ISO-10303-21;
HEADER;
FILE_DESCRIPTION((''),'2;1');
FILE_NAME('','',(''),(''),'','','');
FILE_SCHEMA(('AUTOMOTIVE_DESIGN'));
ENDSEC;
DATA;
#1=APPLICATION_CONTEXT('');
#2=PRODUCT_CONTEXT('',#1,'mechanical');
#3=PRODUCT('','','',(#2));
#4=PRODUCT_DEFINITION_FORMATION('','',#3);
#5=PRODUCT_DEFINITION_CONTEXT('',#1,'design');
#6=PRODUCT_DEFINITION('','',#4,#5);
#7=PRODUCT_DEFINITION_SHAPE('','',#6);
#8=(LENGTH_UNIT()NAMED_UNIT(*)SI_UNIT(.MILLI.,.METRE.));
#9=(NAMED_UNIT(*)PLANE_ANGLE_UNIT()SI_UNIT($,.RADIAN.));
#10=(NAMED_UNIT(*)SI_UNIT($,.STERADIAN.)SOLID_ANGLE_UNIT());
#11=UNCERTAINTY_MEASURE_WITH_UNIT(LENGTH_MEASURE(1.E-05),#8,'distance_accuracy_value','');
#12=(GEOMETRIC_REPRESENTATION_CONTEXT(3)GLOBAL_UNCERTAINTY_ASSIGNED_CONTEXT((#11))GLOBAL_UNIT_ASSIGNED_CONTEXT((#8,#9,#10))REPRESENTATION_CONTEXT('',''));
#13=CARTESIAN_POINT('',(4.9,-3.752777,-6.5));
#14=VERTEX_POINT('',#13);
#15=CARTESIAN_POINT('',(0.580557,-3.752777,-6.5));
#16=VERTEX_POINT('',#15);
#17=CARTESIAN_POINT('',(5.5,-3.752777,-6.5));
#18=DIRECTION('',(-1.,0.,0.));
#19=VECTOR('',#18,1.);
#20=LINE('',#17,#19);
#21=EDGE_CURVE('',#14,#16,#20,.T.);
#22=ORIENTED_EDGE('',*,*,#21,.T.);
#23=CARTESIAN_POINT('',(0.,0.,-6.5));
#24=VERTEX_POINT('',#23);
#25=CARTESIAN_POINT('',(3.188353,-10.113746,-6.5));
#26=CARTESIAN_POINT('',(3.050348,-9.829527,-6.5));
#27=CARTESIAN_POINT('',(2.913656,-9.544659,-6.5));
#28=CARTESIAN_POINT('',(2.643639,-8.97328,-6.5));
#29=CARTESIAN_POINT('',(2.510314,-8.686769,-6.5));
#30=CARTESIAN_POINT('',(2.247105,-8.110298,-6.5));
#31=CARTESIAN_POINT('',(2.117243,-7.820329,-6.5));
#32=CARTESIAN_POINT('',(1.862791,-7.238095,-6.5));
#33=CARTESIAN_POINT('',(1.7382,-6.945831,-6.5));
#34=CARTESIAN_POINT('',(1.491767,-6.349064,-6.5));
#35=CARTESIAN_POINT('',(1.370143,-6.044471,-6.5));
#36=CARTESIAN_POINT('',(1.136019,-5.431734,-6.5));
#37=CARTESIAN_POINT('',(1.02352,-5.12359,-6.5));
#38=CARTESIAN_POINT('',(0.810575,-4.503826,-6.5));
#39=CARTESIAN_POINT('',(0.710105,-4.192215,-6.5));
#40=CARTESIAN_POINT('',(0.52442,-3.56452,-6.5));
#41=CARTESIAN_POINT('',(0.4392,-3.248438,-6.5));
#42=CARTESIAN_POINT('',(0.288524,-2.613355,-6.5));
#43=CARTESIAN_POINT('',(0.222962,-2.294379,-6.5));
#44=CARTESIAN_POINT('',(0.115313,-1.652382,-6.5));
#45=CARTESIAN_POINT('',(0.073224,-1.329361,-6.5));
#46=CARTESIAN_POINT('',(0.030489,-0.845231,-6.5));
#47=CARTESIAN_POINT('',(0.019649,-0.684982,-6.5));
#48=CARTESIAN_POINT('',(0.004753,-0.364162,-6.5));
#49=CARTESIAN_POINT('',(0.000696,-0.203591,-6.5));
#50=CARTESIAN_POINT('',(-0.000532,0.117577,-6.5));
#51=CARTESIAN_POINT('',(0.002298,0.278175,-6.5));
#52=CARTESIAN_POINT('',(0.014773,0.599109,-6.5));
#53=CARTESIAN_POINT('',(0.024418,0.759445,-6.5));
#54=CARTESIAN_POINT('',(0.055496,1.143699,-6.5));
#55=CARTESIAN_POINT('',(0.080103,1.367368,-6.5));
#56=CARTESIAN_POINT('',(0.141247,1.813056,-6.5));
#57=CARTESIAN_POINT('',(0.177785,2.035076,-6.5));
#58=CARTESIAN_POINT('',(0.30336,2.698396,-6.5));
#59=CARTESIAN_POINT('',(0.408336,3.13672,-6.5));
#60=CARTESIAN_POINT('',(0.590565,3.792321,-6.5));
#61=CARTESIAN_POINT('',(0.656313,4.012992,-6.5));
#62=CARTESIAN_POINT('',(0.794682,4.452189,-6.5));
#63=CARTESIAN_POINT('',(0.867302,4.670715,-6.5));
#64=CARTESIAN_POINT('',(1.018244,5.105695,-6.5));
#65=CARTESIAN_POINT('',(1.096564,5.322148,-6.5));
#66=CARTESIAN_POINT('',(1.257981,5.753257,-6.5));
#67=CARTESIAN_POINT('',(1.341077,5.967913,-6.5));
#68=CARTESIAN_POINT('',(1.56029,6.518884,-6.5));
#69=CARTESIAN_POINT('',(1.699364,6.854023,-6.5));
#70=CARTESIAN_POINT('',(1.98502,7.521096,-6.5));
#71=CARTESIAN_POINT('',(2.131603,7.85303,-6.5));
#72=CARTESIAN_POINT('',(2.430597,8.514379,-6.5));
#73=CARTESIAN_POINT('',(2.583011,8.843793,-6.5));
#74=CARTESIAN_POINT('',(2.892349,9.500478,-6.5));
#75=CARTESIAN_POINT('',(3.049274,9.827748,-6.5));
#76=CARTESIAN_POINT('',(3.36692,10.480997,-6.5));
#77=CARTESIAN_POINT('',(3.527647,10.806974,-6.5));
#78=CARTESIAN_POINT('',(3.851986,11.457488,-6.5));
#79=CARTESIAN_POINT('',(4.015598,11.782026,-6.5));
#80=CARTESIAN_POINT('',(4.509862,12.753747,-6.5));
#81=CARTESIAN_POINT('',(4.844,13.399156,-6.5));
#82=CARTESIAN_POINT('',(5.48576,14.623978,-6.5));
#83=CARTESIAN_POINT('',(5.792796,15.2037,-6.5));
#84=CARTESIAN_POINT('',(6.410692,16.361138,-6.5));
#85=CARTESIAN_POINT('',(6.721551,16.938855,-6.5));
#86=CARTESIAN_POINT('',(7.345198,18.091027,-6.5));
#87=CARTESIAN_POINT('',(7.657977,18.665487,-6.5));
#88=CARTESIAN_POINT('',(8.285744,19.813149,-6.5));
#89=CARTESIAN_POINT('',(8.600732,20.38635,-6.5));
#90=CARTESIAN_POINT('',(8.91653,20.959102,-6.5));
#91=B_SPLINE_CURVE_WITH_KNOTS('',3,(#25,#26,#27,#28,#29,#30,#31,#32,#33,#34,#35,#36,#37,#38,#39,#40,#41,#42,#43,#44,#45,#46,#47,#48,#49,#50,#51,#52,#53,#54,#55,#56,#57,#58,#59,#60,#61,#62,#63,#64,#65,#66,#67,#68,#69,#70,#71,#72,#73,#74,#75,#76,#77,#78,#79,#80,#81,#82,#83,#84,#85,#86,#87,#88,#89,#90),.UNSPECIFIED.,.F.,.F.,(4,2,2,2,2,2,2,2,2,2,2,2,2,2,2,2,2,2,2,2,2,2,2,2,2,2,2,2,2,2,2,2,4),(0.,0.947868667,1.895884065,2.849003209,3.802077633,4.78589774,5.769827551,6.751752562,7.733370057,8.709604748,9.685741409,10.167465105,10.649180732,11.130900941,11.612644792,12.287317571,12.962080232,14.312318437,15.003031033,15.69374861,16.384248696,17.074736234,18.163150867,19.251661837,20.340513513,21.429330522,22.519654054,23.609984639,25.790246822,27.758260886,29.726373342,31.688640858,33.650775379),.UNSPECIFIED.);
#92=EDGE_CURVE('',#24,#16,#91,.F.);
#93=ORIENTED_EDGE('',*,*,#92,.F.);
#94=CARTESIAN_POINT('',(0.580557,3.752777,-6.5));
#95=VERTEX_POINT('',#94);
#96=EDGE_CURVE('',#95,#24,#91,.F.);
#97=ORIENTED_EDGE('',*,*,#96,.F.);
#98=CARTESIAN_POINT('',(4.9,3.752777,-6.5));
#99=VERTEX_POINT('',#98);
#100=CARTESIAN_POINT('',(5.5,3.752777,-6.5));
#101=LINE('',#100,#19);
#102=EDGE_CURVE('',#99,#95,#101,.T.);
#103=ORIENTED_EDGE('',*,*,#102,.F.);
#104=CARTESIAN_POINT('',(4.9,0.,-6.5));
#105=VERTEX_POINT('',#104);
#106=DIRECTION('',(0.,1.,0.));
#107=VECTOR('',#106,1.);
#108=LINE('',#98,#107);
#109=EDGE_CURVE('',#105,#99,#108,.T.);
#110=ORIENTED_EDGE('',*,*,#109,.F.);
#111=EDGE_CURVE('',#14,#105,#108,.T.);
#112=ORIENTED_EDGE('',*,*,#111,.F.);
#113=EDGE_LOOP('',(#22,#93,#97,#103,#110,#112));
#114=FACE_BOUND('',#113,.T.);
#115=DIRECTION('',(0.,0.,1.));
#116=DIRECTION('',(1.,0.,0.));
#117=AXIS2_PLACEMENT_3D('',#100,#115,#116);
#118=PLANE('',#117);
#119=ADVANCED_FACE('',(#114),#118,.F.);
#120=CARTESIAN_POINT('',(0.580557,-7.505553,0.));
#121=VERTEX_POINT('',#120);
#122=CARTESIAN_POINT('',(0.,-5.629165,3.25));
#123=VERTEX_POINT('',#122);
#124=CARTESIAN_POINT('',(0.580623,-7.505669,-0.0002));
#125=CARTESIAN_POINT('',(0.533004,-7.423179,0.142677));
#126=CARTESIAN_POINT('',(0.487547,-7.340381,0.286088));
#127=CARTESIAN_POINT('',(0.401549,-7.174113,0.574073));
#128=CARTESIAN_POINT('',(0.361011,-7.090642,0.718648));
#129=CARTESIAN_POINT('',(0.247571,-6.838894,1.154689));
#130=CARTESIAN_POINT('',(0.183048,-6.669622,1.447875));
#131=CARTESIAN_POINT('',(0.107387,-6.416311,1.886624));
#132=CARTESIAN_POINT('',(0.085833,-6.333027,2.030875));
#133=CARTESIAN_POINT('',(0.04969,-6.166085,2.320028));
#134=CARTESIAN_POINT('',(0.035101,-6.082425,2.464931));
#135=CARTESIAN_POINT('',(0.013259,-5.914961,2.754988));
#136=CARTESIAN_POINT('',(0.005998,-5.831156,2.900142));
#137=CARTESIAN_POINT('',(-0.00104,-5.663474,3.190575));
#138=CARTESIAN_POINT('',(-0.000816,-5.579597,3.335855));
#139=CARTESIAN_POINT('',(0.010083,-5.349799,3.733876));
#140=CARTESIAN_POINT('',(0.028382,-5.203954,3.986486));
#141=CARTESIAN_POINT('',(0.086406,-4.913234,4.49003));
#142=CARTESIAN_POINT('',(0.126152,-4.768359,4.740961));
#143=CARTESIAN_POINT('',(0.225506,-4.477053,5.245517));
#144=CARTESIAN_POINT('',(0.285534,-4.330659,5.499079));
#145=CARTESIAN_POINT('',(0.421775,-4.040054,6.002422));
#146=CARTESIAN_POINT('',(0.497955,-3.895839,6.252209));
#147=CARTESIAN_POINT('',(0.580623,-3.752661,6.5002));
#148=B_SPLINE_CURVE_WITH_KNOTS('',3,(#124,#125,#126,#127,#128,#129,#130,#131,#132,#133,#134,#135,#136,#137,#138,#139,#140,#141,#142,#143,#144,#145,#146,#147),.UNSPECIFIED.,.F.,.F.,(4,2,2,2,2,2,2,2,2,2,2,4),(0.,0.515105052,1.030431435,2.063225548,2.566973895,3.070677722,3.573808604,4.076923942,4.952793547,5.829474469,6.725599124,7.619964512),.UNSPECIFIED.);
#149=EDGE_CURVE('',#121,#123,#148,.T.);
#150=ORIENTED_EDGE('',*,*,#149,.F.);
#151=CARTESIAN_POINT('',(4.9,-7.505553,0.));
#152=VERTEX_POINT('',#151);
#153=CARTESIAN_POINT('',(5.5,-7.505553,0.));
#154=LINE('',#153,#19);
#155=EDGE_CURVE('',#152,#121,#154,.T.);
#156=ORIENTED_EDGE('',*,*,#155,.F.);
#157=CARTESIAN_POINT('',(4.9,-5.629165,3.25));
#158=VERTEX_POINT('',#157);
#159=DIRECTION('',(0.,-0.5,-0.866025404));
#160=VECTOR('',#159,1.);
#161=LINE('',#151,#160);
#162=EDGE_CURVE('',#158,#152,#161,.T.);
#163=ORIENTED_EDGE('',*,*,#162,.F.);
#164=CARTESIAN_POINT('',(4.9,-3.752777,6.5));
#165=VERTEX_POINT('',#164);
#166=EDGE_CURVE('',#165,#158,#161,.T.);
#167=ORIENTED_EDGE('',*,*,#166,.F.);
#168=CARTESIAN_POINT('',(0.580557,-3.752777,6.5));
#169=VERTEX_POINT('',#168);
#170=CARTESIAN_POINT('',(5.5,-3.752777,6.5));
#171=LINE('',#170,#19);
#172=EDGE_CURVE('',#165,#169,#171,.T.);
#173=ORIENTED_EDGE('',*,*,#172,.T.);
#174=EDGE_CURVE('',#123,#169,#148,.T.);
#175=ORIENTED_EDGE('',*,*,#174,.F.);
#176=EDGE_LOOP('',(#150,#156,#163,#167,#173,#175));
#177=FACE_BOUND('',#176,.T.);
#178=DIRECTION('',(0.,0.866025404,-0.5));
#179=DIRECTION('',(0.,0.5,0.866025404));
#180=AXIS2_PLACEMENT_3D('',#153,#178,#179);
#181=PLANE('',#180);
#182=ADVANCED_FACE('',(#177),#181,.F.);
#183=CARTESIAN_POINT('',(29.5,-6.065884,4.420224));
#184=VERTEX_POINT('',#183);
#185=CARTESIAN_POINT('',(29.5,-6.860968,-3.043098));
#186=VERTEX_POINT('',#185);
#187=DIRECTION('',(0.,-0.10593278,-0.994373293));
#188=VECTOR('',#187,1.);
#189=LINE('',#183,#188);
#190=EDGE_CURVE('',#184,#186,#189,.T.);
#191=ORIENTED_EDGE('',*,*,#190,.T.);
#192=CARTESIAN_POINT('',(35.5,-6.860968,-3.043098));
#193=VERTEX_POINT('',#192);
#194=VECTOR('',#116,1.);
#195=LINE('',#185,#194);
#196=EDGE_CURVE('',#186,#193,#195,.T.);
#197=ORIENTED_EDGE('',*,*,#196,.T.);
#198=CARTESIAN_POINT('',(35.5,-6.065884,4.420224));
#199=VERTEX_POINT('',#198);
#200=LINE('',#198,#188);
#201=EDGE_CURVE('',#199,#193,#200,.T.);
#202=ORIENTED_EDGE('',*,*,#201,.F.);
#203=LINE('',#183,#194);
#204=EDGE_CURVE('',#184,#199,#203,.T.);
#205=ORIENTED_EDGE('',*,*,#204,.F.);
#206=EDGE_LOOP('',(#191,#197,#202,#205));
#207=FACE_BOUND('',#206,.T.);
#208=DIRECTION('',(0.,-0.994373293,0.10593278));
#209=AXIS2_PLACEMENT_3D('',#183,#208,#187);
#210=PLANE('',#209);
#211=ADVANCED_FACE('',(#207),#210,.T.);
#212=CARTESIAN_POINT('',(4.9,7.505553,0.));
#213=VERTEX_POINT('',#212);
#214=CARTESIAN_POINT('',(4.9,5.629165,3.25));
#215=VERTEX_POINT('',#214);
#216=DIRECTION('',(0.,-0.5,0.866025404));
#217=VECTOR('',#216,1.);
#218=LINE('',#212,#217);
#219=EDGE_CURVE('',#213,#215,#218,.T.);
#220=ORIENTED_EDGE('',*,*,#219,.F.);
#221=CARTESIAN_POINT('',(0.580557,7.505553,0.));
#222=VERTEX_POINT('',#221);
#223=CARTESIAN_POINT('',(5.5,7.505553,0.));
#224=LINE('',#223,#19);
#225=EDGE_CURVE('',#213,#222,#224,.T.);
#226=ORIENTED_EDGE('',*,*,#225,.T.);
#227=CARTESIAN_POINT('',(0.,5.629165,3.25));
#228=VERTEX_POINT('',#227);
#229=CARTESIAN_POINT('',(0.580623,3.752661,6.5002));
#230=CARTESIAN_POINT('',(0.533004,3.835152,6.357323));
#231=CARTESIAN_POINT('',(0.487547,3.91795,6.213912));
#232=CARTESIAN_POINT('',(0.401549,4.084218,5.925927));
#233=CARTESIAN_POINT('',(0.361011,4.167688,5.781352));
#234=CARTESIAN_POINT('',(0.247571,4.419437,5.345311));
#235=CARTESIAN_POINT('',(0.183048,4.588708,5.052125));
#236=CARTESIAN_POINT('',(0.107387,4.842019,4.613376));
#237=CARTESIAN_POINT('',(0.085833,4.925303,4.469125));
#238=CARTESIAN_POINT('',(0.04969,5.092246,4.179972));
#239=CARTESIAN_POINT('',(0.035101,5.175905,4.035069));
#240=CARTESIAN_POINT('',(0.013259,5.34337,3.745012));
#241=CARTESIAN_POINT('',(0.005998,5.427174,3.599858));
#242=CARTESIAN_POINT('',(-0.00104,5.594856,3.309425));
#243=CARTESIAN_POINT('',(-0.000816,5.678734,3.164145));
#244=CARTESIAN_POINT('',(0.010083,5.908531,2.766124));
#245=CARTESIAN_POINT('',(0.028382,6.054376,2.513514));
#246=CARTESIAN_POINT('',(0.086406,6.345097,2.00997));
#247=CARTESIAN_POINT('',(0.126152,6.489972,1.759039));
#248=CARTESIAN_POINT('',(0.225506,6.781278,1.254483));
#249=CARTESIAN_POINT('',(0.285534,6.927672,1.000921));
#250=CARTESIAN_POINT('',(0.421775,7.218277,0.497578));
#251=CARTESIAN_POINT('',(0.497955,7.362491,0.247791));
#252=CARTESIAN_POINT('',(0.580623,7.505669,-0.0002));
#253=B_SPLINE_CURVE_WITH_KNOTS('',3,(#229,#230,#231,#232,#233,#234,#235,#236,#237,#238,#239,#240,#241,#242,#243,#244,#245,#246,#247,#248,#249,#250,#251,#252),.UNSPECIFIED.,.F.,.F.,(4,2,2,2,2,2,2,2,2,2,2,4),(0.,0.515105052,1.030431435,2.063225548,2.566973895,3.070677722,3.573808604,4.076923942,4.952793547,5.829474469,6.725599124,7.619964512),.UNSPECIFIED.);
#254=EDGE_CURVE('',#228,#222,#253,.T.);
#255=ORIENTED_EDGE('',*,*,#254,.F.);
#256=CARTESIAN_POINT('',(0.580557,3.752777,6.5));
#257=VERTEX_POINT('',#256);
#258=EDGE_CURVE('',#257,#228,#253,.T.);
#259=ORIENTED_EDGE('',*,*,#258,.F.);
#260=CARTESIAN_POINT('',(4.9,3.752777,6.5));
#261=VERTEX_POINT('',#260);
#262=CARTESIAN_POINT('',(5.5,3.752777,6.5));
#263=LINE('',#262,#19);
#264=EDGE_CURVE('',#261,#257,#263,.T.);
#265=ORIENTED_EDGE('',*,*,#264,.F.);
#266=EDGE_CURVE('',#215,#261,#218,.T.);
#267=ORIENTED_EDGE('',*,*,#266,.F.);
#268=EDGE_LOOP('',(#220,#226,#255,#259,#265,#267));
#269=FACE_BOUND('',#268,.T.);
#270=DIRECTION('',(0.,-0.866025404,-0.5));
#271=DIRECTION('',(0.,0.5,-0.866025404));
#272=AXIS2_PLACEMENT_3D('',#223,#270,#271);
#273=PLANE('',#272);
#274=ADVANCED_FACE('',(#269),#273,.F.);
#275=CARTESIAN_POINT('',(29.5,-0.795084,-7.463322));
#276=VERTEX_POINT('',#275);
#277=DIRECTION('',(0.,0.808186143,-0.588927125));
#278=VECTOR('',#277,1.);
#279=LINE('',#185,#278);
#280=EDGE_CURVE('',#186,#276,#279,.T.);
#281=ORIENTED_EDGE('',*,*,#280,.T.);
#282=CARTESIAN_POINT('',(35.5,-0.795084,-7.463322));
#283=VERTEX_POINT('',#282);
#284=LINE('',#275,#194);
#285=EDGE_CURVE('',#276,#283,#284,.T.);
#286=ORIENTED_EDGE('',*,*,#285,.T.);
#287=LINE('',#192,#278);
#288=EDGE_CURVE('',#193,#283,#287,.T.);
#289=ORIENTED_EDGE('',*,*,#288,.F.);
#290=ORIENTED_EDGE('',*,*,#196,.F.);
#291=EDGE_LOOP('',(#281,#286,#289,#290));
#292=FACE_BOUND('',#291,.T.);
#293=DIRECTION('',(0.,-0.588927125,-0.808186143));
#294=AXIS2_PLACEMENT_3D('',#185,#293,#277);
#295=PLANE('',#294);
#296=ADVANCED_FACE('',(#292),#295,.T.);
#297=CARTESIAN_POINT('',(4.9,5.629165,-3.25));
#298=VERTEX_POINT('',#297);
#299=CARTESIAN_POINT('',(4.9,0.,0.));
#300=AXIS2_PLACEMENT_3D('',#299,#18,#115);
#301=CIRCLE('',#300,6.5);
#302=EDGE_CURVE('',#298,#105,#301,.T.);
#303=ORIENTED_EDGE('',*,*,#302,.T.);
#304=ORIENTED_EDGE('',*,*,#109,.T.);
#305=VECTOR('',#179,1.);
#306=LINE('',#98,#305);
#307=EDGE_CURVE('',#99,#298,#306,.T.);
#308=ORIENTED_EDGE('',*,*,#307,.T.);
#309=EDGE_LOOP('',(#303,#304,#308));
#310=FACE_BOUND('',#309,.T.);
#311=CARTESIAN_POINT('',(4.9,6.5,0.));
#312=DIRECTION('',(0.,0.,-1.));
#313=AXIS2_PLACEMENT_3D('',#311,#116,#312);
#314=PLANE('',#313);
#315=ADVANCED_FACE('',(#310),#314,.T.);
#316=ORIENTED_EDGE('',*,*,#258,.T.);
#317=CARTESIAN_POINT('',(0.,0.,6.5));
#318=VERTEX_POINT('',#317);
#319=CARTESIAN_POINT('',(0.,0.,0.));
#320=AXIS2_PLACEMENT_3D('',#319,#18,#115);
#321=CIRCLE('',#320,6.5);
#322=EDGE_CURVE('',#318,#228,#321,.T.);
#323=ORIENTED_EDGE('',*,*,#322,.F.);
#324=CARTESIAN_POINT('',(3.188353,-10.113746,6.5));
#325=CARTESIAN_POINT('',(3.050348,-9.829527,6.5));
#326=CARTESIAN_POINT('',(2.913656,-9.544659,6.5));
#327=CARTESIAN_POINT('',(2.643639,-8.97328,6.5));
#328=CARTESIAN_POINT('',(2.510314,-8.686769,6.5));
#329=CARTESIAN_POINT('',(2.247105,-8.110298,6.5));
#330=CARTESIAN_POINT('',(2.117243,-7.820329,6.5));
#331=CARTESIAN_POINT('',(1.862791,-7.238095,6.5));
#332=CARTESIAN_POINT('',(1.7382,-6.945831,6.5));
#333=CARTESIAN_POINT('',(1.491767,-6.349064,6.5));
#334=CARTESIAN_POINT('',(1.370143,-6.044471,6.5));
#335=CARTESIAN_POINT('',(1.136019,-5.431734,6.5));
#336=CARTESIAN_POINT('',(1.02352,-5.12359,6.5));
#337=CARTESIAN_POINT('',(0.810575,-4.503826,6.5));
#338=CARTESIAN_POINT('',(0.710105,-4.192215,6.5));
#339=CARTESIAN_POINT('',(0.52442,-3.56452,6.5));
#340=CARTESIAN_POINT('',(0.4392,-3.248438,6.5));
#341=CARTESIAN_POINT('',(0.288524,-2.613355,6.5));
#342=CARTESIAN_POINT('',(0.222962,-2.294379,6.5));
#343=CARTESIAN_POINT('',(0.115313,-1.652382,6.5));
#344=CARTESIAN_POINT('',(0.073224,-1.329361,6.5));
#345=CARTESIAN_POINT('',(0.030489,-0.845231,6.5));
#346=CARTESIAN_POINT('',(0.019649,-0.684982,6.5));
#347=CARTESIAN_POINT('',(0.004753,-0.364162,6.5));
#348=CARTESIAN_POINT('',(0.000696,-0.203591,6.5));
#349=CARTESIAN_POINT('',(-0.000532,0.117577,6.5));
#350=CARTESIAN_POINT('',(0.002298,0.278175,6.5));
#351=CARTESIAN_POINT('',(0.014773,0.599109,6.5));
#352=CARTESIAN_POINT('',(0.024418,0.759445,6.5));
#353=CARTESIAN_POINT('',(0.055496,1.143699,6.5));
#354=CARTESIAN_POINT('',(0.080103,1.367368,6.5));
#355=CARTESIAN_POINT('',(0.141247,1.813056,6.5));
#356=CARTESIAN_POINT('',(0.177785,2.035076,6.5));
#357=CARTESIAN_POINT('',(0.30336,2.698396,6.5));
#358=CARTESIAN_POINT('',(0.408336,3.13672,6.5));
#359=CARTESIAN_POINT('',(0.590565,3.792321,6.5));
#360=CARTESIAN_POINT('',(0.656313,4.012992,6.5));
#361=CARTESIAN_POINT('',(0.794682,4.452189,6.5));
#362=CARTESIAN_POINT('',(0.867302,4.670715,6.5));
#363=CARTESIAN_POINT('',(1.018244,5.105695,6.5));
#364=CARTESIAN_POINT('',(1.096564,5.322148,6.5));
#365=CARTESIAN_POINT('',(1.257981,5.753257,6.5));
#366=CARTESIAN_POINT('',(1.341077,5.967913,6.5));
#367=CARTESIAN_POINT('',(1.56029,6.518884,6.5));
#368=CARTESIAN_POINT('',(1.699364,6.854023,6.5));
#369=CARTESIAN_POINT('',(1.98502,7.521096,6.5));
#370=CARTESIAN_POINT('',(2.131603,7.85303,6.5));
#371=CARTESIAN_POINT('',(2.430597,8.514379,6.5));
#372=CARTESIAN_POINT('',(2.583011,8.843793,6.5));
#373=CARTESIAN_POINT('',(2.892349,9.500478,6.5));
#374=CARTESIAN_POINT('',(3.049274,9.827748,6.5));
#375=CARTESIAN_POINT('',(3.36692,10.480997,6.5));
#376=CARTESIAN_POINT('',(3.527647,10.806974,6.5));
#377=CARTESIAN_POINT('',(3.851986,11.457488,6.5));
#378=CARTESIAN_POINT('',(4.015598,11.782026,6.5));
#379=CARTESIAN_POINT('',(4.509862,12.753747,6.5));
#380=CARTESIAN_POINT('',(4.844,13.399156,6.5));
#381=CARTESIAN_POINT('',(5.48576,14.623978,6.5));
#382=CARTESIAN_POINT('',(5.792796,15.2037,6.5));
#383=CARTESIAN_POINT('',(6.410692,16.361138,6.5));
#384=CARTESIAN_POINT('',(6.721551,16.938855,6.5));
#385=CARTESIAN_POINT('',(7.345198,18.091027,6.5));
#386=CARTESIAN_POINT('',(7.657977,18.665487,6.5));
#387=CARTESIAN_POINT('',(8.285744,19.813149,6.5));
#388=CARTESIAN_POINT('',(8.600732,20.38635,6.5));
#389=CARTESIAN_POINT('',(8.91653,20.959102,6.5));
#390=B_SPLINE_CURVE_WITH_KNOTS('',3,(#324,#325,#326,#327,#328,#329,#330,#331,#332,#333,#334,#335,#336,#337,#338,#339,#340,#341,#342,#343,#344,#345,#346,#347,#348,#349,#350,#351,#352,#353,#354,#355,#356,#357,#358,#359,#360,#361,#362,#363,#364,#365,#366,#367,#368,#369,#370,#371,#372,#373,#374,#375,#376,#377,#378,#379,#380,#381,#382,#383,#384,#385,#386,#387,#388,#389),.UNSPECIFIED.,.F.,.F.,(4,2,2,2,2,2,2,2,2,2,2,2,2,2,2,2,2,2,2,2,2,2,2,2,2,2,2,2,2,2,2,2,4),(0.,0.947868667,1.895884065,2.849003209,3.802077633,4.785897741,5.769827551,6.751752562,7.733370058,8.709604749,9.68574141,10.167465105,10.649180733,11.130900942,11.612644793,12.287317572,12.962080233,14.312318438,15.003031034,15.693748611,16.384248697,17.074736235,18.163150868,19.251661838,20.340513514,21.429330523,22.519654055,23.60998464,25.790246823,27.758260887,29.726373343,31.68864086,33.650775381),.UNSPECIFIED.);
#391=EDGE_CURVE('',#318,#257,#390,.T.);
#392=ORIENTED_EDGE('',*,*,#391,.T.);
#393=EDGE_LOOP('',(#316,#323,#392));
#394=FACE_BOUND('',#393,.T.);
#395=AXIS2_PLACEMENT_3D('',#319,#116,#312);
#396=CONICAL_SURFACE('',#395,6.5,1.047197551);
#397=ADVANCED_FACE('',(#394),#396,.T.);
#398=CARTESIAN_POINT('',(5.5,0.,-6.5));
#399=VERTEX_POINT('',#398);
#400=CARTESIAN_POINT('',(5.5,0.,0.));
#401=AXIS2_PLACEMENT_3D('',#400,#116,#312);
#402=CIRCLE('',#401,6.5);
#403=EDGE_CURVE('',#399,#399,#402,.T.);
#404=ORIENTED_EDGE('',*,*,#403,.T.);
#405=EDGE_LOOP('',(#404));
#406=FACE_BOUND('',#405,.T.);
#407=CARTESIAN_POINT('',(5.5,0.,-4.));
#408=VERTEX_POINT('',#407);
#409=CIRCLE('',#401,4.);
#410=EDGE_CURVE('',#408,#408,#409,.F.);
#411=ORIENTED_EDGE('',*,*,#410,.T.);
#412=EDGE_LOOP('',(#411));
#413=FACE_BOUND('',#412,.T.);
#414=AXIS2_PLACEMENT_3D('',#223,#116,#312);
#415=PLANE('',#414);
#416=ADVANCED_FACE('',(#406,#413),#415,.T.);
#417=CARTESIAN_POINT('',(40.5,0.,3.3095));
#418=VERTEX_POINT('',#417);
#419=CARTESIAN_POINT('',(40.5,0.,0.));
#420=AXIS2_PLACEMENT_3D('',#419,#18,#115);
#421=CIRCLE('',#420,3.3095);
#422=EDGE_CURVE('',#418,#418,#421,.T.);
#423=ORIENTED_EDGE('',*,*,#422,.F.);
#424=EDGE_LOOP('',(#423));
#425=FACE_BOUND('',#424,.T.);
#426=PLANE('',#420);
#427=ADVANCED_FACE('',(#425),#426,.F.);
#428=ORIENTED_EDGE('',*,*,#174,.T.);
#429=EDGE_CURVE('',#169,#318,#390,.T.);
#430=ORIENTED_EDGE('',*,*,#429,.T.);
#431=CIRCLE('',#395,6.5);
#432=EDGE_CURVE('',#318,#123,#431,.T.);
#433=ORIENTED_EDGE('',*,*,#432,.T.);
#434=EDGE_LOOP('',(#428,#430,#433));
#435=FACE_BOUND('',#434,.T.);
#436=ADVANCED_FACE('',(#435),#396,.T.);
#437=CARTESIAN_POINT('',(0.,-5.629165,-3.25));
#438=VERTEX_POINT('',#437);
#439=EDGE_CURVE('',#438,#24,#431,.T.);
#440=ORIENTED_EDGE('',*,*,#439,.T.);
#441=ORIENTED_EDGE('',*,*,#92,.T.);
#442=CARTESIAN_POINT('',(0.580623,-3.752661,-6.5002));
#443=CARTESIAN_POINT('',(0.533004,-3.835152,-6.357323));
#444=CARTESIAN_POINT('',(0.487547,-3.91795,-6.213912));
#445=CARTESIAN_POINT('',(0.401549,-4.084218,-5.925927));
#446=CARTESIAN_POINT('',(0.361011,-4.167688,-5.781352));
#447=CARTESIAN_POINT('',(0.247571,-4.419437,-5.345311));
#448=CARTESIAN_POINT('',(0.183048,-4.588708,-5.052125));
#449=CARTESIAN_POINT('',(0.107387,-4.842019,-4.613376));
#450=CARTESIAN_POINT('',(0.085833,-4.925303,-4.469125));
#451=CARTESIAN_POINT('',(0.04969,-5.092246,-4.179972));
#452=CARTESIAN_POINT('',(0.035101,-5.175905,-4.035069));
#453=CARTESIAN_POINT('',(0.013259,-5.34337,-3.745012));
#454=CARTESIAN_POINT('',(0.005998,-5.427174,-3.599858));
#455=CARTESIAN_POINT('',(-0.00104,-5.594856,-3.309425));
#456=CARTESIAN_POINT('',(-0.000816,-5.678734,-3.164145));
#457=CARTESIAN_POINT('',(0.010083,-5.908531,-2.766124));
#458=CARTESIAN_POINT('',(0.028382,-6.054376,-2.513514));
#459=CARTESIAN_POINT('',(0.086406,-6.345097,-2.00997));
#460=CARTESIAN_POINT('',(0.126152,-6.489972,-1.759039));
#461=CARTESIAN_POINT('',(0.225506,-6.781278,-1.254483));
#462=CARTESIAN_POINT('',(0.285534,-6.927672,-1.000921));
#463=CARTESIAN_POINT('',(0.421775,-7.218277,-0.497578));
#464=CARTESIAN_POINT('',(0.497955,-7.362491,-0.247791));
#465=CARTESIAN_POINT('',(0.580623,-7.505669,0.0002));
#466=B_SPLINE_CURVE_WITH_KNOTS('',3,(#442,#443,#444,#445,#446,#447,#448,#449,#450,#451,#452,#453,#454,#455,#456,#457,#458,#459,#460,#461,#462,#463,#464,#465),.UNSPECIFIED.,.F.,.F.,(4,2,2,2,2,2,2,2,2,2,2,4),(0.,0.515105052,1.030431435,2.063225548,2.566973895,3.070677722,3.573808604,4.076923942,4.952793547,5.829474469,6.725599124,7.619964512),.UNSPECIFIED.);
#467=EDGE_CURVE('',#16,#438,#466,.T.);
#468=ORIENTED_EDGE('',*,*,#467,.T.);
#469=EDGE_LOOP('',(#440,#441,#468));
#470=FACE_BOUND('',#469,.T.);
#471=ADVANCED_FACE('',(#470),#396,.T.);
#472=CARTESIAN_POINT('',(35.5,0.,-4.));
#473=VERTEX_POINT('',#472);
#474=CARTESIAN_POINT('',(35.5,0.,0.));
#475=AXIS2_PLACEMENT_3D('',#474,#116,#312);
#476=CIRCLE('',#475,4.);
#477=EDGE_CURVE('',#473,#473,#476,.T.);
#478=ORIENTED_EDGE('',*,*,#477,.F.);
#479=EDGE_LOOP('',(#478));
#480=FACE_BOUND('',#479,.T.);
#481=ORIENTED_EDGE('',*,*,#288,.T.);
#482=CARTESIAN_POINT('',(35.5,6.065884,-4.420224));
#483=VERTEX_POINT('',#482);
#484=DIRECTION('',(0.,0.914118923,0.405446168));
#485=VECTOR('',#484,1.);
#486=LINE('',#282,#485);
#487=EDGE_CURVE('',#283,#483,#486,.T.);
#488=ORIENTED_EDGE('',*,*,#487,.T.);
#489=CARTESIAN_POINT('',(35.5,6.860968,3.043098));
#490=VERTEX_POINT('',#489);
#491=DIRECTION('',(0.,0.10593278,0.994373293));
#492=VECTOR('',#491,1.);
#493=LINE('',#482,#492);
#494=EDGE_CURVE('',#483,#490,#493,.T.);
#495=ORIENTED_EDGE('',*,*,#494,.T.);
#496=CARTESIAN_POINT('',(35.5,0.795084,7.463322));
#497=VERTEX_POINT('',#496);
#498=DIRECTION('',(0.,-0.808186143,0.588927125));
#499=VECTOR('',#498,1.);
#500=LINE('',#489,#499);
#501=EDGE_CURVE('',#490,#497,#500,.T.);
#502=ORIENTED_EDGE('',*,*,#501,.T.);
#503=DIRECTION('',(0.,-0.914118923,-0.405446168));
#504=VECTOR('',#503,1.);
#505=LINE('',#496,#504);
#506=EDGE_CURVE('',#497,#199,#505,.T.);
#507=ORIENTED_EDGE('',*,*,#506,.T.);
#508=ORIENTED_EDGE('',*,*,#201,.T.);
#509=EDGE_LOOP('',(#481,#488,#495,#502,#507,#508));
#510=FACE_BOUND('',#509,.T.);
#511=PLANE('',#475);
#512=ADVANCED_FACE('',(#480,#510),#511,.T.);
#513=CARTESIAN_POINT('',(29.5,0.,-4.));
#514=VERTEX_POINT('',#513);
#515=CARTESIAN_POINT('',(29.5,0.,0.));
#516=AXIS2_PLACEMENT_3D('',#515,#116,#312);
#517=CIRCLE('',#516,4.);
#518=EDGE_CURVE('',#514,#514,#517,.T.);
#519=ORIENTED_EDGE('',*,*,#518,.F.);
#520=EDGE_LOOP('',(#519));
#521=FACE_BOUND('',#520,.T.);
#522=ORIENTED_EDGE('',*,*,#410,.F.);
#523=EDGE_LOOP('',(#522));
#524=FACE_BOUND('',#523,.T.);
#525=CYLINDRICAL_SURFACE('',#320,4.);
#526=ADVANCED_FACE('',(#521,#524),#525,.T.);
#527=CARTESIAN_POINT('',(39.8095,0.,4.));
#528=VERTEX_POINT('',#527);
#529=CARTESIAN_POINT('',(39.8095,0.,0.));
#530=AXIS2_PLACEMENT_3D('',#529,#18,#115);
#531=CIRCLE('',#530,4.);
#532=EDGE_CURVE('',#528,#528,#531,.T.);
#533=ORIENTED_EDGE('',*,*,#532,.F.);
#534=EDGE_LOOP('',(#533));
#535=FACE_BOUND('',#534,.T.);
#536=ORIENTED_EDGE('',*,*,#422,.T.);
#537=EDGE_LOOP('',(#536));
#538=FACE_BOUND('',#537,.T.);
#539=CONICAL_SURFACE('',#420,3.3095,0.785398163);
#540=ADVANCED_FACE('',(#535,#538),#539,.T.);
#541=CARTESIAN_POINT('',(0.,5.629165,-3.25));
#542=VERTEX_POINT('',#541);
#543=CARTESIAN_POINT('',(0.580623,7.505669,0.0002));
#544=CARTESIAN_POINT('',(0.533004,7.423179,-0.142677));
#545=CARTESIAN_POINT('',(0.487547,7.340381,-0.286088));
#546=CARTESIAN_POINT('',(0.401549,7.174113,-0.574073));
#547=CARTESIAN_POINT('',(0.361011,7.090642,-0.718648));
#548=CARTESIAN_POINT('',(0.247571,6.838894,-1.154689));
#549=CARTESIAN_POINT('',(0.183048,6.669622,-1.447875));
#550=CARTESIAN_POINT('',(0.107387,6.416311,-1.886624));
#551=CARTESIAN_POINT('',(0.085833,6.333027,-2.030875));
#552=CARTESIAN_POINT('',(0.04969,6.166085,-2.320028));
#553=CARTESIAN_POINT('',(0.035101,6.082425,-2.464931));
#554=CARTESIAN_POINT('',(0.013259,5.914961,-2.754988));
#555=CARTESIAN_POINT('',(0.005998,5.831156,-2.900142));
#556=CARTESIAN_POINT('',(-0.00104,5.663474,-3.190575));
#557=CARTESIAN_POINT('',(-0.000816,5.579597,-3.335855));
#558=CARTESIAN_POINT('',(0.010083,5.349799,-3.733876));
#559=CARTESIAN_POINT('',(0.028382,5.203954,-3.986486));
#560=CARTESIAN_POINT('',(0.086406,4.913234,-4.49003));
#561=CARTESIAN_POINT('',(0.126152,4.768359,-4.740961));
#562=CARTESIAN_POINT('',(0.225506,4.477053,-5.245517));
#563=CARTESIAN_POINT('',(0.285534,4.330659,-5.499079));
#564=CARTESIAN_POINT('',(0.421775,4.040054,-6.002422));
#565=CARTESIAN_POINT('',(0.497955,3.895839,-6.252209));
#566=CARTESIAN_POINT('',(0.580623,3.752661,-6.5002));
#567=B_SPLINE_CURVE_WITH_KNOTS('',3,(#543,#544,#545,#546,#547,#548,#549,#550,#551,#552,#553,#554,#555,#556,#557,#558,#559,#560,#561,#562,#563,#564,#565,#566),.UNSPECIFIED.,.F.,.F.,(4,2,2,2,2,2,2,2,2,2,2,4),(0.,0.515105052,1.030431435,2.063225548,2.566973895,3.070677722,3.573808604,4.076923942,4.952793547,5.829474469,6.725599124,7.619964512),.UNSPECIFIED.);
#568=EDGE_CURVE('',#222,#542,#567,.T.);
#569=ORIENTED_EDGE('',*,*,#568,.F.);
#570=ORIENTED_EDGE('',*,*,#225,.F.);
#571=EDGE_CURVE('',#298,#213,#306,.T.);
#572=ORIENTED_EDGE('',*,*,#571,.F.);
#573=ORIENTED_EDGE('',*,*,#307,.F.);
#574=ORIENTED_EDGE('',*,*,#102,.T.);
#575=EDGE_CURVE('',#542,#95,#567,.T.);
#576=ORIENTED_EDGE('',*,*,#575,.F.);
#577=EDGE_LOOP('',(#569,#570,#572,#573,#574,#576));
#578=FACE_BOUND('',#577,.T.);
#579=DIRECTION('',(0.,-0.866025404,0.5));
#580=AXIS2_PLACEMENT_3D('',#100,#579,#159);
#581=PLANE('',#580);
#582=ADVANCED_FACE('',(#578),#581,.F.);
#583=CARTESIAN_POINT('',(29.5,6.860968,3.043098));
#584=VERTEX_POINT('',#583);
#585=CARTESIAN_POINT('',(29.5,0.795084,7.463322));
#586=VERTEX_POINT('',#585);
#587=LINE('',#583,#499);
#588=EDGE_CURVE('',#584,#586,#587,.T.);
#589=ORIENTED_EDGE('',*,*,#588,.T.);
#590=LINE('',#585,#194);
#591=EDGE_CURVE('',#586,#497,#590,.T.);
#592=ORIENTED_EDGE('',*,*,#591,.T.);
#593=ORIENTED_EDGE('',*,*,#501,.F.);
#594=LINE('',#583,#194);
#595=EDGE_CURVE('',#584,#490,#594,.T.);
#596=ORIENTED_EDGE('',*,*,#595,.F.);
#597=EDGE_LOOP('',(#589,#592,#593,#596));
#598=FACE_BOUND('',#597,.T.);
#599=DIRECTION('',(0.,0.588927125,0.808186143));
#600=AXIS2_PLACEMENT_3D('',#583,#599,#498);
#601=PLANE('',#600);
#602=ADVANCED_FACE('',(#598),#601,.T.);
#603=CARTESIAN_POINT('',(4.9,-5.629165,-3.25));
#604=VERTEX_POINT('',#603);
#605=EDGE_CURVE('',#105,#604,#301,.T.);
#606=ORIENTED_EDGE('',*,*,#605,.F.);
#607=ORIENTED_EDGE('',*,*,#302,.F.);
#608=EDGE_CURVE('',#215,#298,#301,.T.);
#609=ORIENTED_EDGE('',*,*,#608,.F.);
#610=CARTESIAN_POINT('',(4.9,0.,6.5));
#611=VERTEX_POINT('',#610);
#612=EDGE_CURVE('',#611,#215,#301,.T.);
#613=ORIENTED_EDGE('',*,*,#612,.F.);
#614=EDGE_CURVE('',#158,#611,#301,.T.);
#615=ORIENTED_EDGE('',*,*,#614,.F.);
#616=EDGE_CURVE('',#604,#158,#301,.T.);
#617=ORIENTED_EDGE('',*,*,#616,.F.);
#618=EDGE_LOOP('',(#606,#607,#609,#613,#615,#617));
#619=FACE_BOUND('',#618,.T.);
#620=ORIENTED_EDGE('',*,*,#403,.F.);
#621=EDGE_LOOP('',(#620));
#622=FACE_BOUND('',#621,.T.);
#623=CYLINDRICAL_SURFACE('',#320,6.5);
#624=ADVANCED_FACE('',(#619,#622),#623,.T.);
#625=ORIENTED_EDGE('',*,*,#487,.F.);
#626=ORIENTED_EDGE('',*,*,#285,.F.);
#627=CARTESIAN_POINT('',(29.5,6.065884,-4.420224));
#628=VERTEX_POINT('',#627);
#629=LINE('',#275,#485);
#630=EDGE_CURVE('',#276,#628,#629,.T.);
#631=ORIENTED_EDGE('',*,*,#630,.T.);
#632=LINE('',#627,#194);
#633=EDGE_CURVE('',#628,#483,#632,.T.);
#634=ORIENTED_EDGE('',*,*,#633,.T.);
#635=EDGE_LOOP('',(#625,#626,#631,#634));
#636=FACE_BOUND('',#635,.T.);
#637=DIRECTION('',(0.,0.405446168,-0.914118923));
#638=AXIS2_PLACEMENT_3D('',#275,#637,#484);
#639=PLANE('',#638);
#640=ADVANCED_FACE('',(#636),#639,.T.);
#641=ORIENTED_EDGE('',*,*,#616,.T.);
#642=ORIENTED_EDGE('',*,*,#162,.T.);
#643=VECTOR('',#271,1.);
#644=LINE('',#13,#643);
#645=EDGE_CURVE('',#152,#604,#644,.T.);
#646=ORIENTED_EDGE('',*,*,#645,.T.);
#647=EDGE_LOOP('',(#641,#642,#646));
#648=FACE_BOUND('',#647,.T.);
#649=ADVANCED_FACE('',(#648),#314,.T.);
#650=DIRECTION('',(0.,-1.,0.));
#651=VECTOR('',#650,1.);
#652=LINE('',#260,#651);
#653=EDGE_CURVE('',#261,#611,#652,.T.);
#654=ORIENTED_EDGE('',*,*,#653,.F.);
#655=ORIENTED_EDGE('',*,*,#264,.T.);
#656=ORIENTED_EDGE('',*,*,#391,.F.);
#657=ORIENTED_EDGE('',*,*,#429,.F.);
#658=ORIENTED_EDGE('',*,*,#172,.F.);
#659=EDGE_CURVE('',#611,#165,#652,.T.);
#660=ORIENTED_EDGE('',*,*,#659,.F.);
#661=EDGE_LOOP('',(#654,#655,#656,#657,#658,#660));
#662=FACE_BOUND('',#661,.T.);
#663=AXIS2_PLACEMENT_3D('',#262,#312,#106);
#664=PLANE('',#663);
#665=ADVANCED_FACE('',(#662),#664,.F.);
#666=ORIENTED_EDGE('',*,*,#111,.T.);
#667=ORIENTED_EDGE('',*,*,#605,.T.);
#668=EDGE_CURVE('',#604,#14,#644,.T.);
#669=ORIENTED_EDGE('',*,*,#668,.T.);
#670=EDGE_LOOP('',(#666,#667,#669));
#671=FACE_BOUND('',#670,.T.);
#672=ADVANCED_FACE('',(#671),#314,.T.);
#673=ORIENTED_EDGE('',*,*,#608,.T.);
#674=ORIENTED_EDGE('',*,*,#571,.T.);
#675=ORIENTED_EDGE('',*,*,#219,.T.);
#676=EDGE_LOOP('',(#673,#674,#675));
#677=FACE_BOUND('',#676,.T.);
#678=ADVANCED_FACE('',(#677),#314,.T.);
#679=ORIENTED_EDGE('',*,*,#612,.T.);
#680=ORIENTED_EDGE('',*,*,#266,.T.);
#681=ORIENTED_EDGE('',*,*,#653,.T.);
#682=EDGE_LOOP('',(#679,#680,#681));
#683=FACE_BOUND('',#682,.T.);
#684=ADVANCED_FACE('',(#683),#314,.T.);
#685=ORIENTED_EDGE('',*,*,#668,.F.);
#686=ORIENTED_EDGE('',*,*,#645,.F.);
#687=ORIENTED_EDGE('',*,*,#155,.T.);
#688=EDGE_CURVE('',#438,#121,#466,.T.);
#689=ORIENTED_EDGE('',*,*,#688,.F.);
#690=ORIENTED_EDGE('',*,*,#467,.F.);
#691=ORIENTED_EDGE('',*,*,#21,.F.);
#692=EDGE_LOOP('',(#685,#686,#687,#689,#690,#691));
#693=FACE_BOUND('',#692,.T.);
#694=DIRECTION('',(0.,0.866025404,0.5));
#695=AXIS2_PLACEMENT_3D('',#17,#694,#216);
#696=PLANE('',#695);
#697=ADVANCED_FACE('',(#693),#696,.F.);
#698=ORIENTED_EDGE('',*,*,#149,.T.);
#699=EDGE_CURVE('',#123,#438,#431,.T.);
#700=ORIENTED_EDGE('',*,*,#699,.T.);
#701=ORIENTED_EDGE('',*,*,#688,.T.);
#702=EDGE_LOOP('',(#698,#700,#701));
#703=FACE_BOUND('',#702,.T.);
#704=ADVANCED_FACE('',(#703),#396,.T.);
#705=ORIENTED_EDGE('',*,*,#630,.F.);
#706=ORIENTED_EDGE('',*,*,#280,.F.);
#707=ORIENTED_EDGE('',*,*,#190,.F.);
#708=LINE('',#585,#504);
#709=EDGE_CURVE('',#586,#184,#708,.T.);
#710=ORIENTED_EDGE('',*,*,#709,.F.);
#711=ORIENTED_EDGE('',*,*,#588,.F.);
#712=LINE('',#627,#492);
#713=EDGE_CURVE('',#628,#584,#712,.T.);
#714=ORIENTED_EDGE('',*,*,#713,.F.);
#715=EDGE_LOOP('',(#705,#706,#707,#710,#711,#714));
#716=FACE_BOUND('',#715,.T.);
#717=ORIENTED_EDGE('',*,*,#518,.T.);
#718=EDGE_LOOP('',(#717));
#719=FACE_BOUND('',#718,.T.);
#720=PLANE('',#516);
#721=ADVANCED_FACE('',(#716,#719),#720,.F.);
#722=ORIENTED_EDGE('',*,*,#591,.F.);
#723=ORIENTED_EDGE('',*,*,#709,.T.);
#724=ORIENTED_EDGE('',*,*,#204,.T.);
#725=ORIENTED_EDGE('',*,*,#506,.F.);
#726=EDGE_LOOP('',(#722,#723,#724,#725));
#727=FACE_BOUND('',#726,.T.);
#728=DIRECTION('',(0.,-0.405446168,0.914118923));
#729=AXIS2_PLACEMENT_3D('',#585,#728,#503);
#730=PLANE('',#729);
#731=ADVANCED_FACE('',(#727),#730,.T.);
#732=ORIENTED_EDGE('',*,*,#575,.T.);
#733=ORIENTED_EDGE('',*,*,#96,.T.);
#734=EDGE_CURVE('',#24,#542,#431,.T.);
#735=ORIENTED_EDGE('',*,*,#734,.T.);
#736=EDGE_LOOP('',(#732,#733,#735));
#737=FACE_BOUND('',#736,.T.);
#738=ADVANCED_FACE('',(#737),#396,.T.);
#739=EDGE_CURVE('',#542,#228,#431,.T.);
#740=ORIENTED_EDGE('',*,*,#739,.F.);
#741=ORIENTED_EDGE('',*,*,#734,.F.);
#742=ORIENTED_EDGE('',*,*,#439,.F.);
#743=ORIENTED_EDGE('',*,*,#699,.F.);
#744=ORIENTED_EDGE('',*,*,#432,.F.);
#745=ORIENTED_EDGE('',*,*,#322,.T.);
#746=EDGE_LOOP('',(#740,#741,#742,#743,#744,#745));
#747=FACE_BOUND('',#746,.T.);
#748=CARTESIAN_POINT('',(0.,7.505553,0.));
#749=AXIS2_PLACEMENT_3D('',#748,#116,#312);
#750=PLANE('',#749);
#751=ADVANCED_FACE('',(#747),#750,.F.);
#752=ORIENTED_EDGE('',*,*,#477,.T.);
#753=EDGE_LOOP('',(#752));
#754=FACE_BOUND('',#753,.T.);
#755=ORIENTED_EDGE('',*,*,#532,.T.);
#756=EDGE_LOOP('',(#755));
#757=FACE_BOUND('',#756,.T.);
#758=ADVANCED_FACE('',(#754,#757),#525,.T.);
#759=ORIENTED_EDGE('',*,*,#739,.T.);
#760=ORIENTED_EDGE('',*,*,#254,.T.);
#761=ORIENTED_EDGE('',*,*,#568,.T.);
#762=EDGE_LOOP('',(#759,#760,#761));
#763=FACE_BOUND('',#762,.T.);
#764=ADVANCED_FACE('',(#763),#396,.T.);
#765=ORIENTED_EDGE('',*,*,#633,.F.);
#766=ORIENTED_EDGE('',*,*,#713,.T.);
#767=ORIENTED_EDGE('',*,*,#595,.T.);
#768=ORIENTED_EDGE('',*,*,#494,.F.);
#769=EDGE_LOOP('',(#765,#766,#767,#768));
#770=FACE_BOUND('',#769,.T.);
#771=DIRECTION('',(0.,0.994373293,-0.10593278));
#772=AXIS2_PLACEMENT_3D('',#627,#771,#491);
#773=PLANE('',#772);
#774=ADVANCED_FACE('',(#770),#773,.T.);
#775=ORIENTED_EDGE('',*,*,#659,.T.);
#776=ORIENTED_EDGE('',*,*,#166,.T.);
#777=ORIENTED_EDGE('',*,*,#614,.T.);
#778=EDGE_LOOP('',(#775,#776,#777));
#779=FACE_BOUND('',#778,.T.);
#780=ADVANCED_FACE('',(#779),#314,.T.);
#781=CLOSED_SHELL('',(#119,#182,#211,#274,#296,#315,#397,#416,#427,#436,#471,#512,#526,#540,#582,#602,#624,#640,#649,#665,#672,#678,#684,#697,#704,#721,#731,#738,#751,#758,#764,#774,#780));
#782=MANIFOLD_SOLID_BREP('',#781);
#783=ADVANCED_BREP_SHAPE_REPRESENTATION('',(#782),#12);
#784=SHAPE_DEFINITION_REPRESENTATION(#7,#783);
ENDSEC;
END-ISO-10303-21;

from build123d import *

# Parameters (mm, degrees)
BASEHEAD_DEPTH      = 5.5
SKETCH4_W           = 0.6
SKETCH4_H           = 11.005553499
BOSS_EXTRUDE1_DEPTH = 6


# Read off the part's stored shape, not the designer's step: HeadChamfer
with BuildPart() as part:
    # Sketch1 → BaseHead (new body)
    with BuildSketch(Plane(origin=(0, 0, 0), x_dir=(0, 0, -1), z_dir=(1, 0, 0))):
        Polygon((6.5, 3.75277675), (6.5, -3.75277675), (0, -7.505553499), (-6.5, -3.75277675), (-6.5, 3.75277675), (0, 7.505553499), align=None)
    extrude(amount=BASEHEAD_DEPTH)

    # HeadChamfer outline → HeadChamfer (revolve, cut)
    with BuildSketch(Plane.YX):
        Polygon((7.505553503, 0.580556586), (6.499999425, -3.32e-07), (7.505553503, -1.347e-06), align=None)
    revolve(axis=Axis((0, 0, 0), (1, 0, 0)), mode=Mode.SUBTRACT)

    # HeadChamfer 2 outline → HeadChamfer 2 (revolve)
    with BuildSketch(Plane.YX):
        Polygon((4, 5.5), (4, 39.8095), (3.3095, 40.5), (0, 40.5), (0, 5.5), align=None)
    revolve(axis=Axis((0, 0, 0), (1, 0, 0)))

    # Sketch4 → BearingFace (revolve, cut)
    with BuildSketch(Plane.XY, mode=Mode.PRIVATE) as bearingface_sk:
        with Locations((5.2, 12.00277675)):
            Rectangle(SKETCH4_W, SKETCH4_H)
    revolve(bearingface_sk.sketch.rotate(Axis((0, 0, 0), (1, 0, 0)), 90), axis=Axis((0, 0, 0), (1, 0, 0)), mode=Mode.SUBTRACT)

    # Sketch5 → Boss-Extrude1 (add)
    with BuildSketch(Plane(origin=(35.5, 0, 0), x_dir=(0, 0, -1), z_dir=(1, 0, 0))):
        Polygon((-3.043097903, 6.86096848), (-7.46332195, 0.79508415), (-4.420224047, -6.06588433), (3.043097903, -6.86096848), (7.46332195, -0.79508415), (4.420224047, 6.06588433), align=None)
    extrude(amount=-BOSS_EXTRUDE1_DEPTH)


solid = part.part
